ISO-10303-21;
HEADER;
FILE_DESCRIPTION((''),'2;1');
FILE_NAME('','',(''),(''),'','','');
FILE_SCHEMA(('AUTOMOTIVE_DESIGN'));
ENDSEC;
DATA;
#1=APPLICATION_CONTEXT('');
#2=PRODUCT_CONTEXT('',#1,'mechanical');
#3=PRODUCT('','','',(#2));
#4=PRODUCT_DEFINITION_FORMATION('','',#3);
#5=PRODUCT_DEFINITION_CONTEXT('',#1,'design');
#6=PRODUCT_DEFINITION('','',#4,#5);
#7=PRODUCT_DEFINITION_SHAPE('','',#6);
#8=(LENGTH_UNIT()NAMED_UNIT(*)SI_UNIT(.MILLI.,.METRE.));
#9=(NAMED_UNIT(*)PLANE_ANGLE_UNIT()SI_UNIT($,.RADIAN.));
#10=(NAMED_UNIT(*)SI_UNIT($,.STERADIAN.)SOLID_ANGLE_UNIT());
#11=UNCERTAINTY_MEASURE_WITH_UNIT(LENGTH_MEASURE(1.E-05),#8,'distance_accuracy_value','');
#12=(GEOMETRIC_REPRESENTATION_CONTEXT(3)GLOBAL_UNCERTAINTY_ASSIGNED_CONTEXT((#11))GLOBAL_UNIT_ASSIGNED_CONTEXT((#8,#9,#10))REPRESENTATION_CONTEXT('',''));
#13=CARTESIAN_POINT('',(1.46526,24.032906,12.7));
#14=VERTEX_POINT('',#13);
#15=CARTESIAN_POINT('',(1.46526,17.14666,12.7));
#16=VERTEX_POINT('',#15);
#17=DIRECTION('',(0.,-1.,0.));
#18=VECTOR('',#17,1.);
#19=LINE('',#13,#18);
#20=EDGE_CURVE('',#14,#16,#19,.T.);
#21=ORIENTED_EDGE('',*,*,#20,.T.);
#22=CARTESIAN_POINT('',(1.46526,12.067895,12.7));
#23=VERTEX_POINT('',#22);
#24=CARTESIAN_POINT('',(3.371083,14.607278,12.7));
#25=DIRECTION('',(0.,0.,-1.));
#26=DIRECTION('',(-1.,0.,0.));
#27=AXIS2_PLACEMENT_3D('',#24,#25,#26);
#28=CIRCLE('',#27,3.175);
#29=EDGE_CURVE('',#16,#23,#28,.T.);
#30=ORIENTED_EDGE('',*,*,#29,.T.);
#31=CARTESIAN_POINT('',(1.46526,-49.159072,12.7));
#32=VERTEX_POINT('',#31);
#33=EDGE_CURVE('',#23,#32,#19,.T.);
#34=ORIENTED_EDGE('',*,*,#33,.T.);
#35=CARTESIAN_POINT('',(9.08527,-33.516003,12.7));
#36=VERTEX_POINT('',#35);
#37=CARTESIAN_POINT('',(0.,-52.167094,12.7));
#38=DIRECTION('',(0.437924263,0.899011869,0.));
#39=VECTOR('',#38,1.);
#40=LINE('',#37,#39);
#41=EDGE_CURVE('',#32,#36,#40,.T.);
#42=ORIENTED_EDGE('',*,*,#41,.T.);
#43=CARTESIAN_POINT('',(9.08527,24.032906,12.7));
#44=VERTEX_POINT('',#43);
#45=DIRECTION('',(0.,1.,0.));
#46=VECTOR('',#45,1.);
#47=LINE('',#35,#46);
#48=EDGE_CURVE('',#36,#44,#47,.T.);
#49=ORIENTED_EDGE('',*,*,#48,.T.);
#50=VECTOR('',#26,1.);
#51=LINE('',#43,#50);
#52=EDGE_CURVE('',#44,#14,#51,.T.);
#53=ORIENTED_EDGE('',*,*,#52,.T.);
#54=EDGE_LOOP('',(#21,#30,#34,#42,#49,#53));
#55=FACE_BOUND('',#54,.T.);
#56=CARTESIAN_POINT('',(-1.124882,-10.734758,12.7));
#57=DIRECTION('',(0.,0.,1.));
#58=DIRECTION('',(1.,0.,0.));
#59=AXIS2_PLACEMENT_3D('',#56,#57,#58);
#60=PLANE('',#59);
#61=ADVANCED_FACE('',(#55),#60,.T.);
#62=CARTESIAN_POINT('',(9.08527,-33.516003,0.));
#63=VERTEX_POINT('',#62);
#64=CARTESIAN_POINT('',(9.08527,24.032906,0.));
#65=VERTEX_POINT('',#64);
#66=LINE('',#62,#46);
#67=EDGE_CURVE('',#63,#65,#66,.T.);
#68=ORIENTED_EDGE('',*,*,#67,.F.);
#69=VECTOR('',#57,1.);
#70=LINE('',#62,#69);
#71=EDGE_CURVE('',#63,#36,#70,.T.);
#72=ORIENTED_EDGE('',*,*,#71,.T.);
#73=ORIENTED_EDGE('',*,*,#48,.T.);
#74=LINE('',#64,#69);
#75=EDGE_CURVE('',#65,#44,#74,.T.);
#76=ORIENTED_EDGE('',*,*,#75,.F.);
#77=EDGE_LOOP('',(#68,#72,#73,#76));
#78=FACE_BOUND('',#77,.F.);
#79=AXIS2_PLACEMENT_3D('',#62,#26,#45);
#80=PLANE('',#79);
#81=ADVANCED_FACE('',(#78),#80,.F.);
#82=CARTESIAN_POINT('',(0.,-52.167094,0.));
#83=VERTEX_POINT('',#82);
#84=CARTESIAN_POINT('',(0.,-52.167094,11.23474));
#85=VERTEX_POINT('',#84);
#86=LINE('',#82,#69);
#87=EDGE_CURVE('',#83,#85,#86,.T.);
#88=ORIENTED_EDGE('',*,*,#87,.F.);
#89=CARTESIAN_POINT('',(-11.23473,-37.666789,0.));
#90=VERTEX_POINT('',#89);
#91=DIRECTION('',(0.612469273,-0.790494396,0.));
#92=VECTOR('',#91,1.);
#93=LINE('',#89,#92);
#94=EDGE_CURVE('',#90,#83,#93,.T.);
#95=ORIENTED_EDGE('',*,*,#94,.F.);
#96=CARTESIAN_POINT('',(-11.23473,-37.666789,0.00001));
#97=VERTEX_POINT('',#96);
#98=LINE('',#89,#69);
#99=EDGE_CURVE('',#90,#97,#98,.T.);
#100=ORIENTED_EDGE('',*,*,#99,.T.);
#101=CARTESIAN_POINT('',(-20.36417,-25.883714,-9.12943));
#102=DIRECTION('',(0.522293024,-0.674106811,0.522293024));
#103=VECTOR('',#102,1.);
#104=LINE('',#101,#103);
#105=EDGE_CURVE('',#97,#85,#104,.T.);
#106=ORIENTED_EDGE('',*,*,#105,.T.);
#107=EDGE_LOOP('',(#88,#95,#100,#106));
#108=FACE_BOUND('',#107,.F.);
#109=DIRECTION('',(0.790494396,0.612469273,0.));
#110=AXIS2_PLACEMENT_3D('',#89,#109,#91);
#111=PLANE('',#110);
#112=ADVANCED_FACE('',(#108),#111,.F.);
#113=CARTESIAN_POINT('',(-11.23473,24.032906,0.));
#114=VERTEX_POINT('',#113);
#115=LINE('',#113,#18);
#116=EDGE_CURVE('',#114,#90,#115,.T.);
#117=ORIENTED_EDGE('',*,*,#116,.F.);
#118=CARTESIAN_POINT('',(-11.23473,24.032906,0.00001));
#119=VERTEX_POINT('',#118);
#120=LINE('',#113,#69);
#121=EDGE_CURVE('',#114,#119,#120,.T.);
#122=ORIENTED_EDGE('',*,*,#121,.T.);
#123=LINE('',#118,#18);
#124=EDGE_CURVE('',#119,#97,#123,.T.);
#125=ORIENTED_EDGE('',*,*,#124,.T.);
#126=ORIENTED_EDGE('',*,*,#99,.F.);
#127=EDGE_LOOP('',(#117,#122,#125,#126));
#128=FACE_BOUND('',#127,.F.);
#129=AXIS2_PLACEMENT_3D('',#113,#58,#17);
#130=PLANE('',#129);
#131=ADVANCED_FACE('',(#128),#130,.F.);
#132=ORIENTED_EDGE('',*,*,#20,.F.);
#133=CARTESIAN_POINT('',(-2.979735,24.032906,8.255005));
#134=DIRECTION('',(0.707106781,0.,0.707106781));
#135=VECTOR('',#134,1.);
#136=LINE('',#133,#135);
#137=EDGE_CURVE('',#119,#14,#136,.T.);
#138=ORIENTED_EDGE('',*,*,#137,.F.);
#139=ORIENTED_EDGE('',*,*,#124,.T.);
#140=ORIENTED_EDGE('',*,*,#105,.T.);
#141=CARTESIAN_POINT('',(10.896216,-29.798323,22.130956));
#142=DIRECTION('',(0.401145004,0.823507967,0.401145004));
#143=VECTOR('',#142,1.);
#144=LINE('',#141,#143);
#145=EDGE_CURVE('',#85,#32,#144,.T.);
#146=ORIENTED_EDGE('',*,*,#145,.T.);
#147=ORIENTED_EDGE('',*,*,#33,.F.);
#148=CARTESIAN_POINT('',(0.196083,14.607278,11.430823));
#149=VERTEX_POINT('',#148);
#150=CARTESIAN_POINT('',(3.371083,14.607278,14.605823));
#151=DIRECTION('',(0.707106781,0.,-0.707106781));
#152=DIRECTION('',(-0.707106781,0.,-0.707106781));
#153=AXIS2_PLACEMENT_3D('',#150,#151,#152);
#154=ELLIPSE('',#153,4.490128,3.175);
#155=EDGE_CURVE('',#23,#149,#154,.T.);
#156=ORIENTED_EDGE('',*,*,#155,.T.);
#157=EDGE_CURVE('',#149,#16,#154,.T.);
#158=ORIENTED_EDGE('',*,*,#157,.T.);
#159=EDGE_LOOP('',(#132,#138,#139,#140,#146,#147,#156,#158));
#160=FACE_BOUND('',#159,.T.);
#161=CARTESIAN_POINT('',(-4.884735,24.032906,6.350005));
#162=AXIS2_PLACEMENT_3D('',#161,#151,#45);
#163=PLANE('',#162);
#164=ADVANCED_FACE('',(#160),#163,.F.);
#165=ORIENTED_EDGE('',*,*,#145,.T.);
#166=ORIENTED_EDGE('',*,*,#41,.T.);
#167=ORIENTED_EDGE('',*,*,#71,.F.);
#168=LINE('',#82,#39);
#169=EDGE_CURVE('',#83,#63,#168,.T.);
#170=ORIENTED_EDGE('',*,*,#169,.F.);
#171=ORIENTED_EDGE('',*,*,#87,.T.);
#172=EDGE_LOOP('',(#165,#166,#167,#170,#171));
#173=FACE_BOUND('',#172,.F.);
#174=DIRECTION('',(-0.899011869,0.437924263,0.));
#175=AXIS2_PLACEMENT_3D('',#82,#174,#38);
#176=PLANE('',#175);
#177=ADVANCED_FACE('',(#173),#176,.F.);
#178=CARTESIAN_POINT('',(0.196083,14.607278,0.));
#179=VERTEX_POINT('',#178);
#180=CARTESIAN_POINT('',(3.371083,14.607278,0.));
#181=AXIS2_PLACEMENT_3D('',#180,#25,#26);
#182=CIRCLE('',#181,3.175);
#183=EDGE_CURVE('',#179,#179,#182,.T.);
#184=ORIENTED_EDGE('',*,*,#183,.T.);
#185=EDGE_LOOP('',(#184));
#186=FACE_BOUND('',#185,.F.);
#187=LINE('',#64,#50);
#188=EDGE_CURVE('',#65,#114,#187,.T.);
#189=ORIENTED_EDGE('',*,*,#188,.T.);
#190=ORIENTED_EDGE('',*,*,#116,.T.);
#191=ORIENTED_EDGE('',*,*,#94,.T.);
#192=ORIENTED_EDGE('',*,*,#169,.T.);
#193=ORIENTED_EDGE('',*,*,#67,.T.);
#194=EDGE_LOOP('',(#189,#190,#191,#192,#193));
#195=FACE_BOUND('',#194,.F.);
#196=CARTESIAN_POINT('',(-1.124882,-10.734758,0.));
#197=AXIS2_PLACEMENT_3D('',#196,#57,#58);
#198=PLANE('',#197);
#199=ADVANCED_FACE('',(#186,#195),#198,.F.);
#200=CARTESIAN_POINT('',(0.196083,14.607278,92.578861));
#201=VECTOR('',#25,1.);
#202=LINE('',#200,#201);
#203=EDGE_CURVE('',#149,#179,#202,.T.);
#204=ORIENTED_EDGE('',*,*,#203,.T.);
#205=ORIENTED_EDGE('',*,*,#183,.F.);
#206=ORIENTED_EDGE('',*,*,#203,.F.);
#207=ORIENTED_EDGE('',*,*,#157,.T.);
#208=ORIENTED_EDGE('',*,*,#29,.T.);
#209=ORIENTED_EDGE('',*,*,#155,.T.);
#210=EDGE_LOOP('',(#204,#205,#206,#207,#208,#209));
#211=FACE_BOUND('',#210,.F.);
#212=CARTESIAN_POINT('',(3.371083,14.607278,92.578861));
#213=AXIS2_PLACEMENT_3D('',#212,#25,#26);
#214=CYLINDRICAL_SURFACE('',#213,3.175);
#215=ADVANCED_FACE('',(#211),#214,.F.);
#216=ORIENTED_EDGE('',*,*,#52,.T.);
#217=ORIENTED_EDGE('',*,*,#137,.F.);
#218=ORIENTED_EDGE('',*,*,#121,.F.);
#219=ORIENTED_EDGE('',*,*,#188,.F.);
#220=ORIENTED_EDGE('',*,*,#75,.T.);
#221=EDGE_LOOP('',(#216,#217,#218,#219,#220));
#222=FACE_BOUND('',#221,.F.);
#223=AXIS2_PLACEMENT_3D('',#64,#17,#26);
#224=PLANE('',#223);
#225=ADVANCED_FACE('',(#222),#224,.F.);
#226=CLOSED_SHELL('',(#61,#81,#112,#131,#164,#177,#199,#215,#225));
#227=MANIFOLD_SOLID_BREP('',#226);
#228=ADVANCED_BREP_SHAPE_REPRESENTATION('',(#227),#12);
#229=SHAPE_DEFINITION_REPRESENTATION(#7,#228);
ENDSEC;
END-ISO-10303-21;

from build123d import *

# Parameters (mm, degrees)
F1_DEPTH = 12.7
F2_SIZE  = 12.69999
F4_D     = 6.35


# Not quite as in the source:
# - a fillet or chamfer is up to 0.001 mm smaller than in the source, because OpenCascade refuses the exact size


with BuildPart() as f1:
    # F0 (on Top) → F1 (new body)
    with BuildSketch(Plane.XY):
        Polygon((9.0852697523, 24.0329056978), (-11.2347302477, 24.0329056978), (-11.2347302477, 0), (-11.2347302477, -37.6667892456), (0, -52.1670943022), (9.0852697523, -33.5160031522), align=None)
    extrude(amount=F1_DEPTH)

    # F2 (size 12.7 in the source; OpenCascade refuses exactly that, so slightly less here)
    f2_edges = [f1.edges().sort_by_distance(p)[0] for p in [
        (-11.23473, -6.816942, 12.7),
    ]]
    chamfer(f2_edges, length=F2_SIZE)

    # F4 (through all)
    with Locations(Plane.XY.offset(12.7)):
        with Locations((3.3710829448, 14.6072776988)):
            Hole(F4_D / 2)


solid = f1.part
